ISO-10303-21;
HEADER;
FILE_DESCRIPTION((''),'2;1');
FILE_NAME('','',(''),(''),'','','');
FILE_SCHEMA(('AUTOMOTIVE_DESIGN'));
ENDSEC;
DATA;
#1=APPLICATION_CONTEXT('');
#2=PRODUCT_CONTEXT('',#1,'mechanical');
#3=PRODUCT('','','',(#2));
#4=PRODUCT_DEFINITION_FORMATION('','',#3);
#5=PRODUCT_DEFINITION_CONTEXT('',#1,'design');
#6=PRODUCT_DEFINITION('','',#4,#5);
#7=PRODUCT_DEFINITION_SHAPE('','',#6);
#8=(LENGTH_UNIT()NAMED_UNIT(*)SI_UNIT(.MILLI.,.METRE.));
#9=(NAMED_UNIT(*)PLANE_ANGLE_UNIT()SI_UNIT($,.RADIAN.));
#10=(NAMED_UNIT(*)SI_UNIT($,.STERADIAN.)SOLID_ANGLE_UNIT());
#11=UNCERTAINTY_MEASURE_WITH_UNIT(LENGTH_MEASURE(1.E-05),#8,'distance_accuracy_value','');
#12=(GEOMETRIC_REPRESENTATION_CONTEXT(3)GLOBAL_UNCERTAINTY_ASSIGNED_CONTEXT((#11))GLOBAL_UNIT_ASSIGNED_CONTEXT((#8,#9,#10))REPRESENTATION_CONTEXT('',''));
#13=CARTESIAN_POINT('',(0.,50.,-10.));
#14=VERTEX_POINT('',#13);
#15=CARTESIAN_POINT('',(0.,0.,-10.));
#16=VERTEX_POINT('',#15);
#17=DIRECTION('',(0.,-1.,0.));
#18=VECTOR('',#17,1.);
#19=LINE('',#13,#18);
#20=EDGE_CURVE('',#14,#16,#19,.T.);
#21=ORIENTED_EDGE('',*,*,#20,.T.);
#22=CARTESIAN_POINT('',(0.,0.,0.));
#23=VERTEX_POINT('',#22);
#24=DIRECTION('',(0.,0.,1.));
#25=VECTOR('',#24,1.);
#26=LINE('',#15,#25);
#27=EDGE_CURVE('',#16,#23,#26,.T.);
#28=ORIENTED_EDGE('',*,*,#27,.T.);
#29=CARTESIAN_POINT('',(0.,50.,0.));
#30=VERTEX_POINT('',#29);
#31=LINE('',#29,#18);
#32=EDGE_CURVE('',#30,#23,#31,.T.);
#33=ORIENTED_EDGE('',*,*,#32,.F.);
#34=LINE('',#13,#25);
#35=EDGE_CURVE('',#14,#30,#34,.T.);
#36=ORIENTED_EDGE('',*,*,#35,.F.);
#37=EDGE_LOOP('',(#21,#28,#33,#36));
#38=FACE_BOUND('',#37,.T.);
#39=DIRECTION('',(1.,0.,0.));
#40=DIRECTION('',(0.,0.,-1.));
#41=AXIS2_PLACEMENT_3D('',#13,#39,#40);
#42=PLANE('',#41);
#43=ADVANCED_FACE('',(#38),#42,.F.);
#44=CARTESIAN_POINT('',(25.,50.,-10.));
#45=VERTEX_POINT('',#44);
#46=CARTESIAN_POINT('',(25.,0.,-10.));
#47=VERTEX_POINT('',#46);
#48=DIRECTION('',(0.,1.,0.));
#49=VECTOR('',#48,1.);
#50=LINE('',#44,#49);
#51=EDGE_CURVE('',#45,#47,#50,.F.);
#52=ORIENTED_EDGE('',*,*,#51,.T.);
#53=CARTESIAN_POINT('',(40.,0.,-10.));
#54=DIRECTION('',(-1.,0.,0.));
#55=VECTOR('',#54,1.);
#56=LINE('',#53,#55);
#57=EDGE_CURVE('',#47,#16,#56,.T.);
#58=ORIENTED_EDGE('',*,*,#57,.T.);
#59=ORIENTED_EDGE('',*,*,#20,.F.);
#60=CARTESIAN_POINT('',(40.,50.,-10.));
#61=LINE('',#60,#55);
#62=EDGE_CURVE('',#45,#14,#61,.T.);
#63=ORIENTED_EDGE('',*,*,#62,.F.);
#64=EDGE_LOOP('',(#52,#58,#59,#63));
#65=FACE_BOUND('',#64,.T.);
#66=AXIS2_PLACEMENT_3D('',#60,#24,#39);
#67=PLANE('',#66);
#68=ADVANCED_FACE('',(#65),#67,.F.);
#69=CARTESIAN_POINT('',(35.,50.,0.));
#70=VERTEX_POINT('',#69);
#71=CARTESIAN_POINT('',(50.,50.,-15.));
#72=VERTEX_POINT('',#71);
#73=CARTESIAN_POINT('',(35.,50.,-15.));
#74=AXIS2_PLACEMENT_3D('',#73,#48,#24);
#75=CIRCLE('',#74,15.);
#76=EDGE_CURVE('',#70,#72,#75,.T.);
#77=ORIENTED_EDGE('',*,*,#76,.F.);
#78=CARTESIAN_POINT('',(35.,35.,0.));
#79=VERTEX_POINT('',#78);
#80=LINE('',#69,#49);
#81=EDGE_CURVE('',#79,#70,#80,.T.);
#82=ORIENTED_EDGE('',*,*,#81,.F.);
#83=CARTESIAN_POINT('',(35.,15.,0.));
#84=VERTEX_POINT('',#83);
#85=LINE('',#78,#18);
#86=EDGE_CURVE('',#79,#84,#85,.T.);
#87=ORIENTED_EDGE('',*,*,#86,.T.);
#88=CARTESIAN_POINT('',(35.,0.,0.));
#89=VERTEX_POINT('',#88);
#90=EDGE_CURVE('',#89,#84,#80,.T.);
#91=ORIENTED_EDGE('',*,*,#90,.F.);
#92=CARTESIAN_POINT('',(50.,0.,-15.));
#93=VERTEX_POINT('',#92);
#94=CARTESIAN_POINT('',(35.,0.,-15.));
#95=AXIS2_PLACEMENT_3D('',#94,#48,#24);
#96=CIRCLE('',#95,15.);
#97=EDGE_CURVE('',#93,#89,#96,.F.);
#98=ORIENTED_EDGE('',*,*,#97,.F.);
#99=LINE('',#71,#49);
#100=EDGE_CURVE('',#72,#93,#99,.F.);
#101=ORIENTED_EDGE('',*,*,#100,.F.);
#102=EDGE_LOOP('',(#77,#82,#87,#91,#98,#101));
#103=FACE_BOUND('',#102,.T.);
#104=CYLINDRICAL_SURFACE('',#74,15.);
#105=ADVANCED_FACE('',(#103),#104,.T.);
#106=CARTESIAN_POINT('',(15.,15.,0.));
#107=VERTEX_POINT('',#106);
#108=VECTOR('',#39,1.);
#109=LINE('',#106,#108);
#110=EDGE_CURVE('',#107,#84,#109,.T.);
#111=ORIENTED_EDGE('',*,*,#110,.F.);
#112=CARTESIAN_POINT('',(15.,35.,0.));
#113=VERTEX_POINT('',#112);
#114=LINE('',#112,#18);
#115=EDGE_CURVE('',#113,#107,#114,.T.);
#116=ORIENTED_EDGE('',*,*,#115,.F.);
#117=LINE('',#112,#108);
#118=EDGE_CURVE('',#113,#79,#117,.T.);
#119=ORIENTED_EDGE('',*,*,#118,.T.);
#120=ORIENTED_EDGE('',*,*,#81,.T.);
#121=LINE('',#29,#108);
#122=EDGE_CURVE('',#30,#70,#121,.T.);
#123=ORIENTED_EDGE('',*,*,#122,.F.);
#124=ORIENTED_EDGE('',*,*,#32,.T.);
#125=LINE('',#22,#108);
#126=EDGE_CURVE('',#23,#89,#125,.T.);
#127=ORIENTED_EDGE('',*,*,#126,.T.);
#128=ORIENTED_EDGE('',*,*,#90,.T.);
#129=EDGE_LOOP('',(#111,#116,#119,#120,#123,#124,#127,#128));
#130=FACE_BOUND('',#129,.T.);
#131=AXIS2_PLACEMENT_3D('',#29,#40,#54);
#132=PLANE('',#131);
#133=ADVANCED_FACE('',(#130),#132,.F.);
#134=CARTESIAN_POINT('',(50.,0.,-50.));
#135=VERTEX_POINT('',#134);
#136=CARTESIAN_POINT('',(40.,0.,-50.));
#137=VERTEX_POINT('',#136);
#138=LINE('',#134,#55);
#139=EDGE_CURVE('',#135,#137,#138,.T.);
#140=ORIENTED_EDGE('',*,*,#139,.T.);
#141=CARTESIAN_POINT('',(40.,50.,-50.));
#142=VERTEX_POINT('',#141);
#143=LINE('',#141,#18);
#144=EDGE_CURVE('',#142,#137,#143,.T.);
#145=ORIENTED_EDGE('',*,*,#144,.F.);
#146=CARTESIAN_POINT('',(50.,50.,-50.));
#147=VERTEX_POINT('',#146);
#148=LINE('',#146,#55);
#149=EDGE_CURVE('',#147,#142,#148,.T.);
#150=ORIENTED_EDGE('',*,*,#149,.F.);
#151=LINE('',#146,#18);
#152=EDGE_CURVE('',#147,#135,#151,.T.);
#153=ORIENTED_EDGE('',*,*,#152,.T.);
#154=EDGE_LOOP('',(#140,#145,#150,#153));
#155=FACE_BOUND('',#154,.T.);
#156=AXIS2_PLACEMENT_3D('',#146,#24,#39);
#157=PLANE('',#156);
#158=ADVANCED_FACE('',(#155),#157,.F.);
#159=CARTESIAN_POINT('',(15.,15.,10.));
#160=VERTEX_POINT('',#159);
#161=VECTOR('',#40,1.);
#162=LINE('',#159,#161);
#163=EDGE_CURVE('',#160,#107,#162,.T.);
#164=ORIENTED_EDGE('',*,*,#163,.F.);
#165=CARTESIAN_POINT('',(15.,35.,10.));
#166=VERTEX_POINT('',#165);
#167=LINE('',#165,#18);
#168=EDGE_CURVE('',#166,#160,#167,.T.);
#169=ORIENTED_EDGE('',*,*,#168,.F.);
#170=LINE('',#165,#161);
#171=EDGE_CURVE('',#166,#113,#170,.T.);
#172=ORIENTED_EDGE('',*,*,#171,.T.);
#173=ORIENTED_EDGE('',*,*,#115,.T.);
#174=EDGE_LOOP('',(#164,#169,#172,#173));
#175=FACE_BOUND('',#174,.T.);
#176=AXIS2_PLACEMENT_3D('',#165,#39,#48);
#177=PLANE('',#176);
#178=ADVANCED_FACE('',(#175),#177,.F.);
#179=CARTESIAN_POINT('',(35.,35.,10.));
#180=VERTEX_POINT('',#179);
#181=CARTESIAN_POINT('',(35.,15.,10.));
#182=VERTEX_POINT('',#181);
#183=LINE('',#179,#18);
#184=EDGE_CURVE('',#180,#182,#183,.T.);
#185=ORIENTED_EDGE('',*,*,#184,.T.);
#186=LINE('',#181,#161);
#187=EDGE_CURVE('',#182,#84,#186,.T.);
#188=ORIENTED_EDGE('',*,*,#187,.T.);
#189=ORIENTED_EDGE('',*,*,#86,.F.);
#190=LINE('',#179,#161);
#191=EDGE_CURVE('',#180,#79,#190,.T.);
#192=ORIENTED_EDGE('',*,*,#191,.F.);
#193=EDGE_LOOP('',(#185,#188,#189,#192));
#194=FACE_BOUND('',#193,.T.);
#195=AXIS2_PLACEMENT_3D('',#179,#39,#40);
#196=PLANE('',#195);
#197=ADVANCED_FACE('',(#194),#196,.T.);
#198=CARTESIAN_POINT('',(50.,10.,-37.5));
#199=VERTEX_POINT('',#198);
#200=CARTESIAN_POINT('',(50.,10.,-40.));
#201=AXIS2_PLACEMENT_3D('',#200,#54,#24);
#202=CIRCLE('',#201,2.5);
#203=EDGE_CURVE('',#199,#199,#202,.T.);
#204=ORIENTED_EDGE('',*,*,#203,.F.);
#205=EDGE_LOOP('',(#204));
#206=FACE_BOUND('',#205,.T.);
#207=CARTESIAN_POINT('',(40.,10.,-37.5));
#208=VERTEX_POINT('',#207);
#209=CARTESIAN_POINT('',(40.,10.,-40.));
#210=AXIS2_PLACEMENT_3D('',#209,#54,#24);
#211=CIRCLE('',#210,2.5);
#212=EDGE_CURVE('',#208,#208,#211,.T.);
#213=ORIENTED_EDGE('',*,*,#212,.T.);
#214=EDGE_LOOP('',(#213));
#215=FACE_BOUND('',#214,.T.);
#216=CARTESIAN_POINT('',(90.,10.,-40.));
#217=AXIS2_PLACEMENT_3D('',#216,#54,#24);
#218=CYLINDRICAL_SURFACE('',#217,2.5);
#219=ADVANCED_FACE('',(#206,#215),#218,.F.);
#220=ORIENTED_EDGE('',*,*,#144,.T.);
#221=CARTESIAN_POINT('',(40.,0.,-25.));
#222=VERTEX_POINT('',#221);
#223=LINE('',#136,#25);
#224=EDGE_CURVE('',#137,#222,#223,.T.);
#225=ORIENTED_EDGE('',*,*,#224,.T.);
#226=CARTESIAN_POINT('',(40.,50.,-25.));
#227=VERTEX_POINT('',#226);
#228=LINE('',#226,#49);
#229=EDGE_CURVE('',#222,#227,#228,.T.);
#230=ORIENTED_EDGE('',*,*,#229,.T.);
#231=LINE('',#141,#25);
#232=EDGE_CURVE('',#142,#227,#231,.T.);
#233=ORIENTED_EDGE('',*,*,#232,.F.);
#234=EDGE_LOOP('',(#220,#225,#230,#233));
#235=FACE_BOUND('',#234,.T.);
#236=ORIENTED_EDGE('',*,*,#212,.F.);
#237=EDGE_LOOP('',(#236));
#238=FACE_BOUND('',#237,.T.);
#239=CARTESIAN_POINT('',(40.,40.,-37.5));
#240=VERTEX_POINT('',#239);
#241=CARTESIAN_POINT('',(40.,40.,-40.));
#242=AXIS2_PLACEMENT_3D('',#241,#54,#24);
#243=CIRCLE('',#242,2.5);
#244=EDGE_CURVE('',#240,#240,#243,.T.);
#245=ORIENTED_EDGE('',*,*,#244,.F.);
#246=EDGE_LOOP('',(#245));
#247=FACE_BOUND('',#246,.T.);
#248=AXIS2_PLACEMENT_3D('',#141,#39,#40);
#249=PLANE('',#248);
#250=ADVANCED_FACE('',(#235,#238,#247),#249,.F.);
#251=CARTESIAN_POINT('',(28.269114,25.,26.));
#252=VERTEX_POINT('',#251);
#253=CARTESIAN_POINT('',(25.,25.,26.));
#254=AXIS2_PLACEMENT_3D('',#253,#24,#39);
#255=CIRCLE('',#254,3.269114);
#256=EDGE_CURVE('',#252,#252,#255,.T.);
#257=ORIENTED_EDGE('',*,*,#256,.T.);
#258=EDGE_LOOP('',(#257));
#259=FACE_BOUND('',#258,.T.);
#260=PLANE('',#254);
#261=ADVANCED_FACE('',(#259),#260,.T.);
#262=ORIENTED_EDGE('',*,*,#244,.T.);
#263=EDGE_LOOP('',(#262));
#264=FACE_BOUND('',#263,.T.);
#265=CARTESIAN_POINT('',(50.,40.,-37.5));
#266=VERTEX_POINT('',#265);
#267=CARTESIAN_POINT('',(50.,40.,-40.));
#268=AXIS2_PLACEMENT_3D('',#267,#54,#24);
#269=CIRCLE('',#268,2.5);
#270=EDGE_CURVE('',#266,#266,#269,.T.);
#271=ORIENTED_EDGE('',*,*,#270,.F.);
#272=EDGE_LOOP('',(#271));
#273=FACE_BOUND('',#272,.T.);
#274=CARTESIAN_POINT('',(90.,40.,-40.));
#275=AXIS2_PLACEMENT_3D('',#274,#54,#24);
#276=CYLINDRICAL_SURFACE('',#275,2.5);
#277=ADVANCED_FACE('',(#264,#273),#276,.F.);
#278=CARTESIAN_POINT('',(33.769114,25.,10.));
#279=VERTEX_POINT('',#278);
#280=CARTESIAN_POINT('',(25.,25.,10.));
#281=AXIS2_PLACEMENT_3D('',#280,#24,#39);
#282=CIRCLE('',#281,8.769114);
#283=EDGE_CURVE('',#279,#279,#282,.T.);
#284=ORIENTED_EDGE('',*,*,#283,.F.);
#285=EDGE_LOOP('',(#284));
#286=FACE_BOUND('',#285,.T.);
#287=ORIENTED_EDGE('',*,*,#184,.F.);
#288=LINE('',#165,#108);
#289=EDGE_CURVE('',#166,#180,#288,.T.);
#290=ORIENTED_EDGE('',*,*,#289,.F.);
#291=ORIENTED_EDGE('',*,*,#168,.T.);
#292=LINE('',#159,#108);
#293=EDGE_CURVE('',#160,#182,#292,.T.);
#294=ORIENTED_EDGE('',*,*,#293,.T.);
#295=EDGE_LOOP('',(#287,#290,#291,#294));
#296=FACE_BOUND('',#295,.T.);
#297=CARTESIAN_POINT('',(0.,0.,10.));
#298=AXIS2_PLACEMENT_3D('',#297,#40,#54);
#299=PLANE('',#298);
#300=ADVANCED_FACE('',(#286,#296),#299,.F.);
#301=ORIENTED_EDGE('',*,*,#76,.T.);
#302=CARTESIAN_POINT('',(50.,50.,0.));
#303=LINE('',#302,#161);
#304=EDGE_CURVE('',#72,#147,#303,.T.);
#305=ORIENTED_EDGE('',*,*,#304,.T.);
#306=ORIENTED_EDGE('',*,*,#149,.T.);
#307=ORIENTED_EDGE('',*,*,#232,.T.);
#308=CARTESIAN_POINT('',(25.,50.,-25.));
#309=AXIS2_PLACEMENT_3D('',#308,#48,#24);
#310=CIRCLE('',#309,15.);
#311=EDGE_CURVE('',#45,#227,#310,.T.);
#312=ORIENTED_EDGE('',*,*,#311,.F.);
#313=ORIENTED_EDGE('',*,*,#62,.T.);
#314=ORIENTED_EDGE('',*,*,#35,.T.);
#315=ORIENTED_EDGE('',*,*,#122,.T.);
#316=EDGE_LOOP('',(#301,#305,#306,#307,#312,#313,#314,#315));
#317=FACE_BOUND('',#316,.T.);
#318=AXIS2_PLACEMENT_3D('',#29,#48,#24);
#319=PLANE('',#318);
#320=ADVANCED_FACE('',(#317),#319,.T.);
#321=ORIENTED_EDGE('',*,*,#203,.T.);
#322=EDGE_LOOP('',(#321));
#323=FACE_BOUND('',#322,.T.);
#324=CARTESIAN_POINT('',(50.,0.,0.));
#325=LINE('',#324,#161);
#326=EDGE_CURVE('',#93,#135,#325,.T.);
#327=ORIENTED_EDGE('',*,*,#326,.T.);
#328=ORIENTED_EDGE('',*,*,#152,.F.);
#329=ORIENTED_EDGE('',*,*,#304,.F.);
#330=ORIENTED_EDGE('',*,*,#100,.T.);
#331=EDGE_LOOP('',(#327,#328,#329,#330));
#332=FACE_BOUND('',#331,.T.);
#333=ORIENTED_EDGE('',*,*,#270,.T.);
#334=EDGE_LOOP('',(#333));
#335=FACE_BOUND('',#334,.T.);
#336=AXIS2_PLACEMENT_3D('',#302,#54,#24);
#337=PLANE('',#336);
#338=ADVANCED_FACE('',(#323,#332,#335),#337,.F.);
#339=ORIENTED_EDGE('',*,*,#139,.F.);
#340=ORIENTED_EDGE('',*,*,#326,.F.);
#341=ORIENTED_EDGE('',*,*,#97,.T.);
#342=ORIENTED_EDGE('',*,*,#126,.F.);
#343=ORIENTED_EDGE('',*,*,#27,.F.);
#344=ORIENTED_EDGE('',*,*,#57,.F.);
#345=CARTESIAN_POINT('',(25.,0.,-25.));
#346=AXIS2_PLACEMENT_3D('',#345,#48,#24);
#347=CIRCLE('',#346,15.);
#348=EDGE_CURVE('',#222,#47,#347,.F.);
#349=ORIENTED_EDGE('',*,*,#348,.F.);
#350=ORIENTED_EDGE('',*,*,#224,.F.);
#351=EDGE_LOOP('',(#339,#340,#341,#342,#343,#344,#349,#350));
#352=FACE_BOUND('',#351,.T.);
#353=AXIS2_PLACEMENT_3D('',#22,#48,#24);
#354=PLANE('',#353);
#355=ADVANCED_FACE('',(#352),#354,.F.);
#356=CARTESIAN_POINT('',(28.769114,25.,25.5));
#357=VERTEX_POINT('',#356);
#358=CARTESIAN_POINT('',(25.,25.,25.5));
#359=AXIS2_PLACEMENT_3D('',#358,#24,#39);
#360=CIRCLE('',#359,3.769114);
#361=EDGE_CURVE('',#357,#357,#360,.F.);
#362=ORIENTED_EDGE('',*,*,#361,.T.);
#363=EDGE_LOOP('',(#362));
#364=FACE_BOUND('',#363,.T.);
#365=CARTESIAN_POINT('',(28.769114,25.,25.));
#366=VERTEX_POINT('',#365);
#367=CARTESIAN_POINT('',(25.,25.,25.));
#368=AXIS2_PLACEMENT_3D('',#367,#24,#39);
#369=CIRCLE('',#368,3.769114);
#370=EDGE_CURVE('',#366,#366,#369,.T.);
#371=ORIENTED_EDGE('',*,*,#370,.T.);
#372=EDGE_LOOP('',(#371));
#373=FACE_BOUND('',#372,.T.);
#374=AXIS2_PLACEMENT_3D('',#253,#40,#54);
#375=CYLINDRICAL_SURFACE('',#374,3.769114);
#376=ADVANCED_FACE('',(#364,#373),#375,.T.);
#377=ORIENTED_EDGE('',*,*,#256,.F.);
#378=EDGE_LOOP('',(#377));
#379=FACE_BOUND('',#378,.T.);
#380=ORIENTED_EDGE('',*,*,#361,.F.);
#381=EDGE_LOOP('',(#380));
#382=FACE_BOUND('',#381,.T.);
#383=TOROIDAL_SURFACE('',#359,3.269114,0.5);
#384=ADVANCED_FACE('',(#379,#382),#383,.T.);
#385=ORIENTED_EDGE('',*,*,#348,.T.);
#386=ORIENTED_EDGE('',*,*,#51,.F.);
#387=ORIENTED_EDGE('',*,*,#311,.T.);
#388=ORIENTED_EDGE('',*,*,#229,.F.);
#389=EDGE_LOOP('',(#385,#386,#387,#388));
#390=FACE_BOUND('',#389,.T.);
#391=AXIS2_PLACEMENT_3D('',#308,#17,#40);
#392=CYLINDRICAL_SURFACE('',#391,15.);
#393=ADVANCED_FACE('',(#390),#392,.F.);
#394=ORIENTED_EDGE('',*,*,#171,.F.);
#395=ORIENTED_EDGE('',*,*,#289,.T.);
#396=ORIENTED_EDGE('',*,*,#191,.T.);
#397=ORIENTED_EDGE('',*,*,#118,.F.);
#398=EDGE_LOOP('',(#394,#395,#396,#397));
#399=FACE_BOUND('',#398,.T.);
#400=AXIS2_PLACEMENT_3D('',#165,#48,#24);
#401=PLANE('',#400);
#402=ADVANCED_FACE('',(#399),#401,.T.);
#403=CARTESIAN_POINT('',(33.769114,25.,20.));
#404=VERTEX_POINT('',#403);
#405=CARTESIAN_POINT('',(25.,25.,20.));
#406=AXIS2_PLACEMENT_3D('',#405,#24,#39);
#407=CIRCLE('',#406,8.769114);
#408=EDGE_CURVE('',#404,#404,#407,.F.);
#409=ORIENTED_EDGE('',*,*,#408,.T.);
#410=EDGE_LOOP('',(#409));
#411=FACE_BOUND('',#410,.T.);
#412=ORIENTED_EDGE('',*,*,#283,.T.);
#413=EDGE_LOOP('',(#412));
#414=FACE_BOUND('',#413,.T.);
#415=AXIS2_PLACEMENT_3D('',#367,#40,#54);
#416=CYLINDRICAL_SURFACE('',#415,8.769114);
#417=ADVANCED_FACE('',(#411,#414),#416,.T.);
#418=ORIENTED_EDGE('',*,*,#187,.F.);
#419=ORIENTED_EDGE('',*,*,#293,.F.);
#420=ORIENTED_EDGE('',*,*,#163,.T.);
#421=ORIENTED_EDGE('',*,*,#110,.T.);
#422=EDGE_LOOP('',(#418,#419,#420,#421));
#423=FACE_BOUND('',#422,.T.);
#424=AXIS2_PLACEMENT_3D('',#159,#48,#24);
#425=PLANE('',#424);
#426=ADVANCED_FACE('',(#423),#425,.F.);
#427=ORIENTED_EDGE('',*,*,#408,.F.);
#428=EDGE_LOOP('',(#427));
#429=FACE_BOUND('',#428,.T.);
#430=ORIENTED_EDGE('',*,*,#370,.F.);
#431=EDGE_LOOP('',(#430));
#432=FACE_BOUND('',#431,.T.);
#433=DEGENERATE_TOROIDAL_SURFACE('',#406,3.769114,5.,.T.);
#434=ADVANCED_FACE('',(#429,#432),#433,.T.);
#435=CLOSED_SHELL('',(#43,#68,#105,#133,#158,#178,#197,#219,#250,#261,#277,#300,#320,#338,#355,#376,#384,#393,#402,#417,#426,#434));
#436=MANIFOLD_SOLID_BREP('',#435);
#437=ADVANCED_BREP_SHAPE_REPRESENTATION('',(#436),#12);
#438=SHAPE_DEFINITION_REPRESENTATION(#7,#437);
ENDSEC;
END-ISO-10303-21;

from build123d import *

# Parameters (mm, degrees)
BOSS_EXTRUDE1_DEPTH = 50
SKETCH2_R           = 2.5
CUT_EXTRUDE2_DEPTH  = 50
SKETCH3_W           = 20
SKETCH3_H           = 20
BOSS_EXTRUDE2_DEPTH = 10
SKETCH4_R           = 8.769113897
BOSS_EXTRUDE3_DEPTH = 15
FILLET1_R           = 5
FILLET2_R           = 15
FILLET3_R           = 15
SKETCH7_R           = 3.769113897
BOSS_EXTRUDE4_DEPTH = 1
FILLET5_R           = 0.5


with BuildPart() as part:
    # Sketch1 → Boss-Extrude1 (new body)
    with BuildSketch(Plane(origin=(0, 0, 0), x_dir=(1, 0, 0), z_dir=(0, 1, 0))):
        Polygon((0, 0), (50, 0), (50, 50), (40, 50), (40, 10), (0, 10), align=None)
    extrude(amount=BOSS_EXTRUDE1_DEPTH)

    # Sketch2 → Cut-Extrude2 (cut)
    with BuildSketch(Plane.ZY.offset(-40)):
        with Locations((-40, 10)):
            Circle(SKETCH2_R)
        with Locations((-40, 40)):
            Circle(SKETCH2_R)
    extrude(amount=-CUT_EXTRUDE2_DEPTH, mode=Mode.SUBTRACT)

    # Sketch3 → Boss-Extrude2 (add)
    with BuildSketch(Plane.XY):
        with Locations((25, 25)):
            Rectangle(SKETCH3_W, SKETCH3_H)
    extrude(amount=BOSS_EXTRUDE2_DEPTH)

    # Sketch4 → Boss-Extrude3 (add)
    with BuildSketch(Plane.XY.offset(10)):
        with Locations((25, 25)):
            Circle(SKETCH4_R)
    extrude(amount=BOSS_EXTRUDE3_DEPTH)

    # Fillet1
    fillet1_edges = [part.edges().sort_by_distance(p)[0] for p in [
        (16.230886103, 25, 25),
    ]]
    fillet(fillet1_edges, radius=FILLET1_R)

    # Fillet2
    fillet2_edges = [part.edges().sort_by_distance(p)[0] for p in [
        (40, 25, -10),
    ]]
    fillet(fillet2_edges, radius=FILLET2_R)

    # Fillet3
    fillet3_edges = [part.edges().sort_by_distance(p)[0] for p in [
        (50, 25, 0),
    ]]
    fillet(fillet3_edges, radius=FILLET3_R - 0.0001)  # a hair under: the kernel refuses the full size

    # Sketch7 → Boss-Extrude4 (add)
    with BuildSketch(Plane.XY.offset(25)):
        with Locations((25, 25)):
            Circle(SKETCH7_R)
    extrude(amount=BOSS_EXTRUDE4_DEPTH)

    # Fillet5
    fillet5_edges = [part.edges().sort_by_distance(p)[0] for p in [
        (21.230886103, 25, 26),
    ]]
    fillet(fillet5_edges, radius=FILLET5_R)


solid = part.part
